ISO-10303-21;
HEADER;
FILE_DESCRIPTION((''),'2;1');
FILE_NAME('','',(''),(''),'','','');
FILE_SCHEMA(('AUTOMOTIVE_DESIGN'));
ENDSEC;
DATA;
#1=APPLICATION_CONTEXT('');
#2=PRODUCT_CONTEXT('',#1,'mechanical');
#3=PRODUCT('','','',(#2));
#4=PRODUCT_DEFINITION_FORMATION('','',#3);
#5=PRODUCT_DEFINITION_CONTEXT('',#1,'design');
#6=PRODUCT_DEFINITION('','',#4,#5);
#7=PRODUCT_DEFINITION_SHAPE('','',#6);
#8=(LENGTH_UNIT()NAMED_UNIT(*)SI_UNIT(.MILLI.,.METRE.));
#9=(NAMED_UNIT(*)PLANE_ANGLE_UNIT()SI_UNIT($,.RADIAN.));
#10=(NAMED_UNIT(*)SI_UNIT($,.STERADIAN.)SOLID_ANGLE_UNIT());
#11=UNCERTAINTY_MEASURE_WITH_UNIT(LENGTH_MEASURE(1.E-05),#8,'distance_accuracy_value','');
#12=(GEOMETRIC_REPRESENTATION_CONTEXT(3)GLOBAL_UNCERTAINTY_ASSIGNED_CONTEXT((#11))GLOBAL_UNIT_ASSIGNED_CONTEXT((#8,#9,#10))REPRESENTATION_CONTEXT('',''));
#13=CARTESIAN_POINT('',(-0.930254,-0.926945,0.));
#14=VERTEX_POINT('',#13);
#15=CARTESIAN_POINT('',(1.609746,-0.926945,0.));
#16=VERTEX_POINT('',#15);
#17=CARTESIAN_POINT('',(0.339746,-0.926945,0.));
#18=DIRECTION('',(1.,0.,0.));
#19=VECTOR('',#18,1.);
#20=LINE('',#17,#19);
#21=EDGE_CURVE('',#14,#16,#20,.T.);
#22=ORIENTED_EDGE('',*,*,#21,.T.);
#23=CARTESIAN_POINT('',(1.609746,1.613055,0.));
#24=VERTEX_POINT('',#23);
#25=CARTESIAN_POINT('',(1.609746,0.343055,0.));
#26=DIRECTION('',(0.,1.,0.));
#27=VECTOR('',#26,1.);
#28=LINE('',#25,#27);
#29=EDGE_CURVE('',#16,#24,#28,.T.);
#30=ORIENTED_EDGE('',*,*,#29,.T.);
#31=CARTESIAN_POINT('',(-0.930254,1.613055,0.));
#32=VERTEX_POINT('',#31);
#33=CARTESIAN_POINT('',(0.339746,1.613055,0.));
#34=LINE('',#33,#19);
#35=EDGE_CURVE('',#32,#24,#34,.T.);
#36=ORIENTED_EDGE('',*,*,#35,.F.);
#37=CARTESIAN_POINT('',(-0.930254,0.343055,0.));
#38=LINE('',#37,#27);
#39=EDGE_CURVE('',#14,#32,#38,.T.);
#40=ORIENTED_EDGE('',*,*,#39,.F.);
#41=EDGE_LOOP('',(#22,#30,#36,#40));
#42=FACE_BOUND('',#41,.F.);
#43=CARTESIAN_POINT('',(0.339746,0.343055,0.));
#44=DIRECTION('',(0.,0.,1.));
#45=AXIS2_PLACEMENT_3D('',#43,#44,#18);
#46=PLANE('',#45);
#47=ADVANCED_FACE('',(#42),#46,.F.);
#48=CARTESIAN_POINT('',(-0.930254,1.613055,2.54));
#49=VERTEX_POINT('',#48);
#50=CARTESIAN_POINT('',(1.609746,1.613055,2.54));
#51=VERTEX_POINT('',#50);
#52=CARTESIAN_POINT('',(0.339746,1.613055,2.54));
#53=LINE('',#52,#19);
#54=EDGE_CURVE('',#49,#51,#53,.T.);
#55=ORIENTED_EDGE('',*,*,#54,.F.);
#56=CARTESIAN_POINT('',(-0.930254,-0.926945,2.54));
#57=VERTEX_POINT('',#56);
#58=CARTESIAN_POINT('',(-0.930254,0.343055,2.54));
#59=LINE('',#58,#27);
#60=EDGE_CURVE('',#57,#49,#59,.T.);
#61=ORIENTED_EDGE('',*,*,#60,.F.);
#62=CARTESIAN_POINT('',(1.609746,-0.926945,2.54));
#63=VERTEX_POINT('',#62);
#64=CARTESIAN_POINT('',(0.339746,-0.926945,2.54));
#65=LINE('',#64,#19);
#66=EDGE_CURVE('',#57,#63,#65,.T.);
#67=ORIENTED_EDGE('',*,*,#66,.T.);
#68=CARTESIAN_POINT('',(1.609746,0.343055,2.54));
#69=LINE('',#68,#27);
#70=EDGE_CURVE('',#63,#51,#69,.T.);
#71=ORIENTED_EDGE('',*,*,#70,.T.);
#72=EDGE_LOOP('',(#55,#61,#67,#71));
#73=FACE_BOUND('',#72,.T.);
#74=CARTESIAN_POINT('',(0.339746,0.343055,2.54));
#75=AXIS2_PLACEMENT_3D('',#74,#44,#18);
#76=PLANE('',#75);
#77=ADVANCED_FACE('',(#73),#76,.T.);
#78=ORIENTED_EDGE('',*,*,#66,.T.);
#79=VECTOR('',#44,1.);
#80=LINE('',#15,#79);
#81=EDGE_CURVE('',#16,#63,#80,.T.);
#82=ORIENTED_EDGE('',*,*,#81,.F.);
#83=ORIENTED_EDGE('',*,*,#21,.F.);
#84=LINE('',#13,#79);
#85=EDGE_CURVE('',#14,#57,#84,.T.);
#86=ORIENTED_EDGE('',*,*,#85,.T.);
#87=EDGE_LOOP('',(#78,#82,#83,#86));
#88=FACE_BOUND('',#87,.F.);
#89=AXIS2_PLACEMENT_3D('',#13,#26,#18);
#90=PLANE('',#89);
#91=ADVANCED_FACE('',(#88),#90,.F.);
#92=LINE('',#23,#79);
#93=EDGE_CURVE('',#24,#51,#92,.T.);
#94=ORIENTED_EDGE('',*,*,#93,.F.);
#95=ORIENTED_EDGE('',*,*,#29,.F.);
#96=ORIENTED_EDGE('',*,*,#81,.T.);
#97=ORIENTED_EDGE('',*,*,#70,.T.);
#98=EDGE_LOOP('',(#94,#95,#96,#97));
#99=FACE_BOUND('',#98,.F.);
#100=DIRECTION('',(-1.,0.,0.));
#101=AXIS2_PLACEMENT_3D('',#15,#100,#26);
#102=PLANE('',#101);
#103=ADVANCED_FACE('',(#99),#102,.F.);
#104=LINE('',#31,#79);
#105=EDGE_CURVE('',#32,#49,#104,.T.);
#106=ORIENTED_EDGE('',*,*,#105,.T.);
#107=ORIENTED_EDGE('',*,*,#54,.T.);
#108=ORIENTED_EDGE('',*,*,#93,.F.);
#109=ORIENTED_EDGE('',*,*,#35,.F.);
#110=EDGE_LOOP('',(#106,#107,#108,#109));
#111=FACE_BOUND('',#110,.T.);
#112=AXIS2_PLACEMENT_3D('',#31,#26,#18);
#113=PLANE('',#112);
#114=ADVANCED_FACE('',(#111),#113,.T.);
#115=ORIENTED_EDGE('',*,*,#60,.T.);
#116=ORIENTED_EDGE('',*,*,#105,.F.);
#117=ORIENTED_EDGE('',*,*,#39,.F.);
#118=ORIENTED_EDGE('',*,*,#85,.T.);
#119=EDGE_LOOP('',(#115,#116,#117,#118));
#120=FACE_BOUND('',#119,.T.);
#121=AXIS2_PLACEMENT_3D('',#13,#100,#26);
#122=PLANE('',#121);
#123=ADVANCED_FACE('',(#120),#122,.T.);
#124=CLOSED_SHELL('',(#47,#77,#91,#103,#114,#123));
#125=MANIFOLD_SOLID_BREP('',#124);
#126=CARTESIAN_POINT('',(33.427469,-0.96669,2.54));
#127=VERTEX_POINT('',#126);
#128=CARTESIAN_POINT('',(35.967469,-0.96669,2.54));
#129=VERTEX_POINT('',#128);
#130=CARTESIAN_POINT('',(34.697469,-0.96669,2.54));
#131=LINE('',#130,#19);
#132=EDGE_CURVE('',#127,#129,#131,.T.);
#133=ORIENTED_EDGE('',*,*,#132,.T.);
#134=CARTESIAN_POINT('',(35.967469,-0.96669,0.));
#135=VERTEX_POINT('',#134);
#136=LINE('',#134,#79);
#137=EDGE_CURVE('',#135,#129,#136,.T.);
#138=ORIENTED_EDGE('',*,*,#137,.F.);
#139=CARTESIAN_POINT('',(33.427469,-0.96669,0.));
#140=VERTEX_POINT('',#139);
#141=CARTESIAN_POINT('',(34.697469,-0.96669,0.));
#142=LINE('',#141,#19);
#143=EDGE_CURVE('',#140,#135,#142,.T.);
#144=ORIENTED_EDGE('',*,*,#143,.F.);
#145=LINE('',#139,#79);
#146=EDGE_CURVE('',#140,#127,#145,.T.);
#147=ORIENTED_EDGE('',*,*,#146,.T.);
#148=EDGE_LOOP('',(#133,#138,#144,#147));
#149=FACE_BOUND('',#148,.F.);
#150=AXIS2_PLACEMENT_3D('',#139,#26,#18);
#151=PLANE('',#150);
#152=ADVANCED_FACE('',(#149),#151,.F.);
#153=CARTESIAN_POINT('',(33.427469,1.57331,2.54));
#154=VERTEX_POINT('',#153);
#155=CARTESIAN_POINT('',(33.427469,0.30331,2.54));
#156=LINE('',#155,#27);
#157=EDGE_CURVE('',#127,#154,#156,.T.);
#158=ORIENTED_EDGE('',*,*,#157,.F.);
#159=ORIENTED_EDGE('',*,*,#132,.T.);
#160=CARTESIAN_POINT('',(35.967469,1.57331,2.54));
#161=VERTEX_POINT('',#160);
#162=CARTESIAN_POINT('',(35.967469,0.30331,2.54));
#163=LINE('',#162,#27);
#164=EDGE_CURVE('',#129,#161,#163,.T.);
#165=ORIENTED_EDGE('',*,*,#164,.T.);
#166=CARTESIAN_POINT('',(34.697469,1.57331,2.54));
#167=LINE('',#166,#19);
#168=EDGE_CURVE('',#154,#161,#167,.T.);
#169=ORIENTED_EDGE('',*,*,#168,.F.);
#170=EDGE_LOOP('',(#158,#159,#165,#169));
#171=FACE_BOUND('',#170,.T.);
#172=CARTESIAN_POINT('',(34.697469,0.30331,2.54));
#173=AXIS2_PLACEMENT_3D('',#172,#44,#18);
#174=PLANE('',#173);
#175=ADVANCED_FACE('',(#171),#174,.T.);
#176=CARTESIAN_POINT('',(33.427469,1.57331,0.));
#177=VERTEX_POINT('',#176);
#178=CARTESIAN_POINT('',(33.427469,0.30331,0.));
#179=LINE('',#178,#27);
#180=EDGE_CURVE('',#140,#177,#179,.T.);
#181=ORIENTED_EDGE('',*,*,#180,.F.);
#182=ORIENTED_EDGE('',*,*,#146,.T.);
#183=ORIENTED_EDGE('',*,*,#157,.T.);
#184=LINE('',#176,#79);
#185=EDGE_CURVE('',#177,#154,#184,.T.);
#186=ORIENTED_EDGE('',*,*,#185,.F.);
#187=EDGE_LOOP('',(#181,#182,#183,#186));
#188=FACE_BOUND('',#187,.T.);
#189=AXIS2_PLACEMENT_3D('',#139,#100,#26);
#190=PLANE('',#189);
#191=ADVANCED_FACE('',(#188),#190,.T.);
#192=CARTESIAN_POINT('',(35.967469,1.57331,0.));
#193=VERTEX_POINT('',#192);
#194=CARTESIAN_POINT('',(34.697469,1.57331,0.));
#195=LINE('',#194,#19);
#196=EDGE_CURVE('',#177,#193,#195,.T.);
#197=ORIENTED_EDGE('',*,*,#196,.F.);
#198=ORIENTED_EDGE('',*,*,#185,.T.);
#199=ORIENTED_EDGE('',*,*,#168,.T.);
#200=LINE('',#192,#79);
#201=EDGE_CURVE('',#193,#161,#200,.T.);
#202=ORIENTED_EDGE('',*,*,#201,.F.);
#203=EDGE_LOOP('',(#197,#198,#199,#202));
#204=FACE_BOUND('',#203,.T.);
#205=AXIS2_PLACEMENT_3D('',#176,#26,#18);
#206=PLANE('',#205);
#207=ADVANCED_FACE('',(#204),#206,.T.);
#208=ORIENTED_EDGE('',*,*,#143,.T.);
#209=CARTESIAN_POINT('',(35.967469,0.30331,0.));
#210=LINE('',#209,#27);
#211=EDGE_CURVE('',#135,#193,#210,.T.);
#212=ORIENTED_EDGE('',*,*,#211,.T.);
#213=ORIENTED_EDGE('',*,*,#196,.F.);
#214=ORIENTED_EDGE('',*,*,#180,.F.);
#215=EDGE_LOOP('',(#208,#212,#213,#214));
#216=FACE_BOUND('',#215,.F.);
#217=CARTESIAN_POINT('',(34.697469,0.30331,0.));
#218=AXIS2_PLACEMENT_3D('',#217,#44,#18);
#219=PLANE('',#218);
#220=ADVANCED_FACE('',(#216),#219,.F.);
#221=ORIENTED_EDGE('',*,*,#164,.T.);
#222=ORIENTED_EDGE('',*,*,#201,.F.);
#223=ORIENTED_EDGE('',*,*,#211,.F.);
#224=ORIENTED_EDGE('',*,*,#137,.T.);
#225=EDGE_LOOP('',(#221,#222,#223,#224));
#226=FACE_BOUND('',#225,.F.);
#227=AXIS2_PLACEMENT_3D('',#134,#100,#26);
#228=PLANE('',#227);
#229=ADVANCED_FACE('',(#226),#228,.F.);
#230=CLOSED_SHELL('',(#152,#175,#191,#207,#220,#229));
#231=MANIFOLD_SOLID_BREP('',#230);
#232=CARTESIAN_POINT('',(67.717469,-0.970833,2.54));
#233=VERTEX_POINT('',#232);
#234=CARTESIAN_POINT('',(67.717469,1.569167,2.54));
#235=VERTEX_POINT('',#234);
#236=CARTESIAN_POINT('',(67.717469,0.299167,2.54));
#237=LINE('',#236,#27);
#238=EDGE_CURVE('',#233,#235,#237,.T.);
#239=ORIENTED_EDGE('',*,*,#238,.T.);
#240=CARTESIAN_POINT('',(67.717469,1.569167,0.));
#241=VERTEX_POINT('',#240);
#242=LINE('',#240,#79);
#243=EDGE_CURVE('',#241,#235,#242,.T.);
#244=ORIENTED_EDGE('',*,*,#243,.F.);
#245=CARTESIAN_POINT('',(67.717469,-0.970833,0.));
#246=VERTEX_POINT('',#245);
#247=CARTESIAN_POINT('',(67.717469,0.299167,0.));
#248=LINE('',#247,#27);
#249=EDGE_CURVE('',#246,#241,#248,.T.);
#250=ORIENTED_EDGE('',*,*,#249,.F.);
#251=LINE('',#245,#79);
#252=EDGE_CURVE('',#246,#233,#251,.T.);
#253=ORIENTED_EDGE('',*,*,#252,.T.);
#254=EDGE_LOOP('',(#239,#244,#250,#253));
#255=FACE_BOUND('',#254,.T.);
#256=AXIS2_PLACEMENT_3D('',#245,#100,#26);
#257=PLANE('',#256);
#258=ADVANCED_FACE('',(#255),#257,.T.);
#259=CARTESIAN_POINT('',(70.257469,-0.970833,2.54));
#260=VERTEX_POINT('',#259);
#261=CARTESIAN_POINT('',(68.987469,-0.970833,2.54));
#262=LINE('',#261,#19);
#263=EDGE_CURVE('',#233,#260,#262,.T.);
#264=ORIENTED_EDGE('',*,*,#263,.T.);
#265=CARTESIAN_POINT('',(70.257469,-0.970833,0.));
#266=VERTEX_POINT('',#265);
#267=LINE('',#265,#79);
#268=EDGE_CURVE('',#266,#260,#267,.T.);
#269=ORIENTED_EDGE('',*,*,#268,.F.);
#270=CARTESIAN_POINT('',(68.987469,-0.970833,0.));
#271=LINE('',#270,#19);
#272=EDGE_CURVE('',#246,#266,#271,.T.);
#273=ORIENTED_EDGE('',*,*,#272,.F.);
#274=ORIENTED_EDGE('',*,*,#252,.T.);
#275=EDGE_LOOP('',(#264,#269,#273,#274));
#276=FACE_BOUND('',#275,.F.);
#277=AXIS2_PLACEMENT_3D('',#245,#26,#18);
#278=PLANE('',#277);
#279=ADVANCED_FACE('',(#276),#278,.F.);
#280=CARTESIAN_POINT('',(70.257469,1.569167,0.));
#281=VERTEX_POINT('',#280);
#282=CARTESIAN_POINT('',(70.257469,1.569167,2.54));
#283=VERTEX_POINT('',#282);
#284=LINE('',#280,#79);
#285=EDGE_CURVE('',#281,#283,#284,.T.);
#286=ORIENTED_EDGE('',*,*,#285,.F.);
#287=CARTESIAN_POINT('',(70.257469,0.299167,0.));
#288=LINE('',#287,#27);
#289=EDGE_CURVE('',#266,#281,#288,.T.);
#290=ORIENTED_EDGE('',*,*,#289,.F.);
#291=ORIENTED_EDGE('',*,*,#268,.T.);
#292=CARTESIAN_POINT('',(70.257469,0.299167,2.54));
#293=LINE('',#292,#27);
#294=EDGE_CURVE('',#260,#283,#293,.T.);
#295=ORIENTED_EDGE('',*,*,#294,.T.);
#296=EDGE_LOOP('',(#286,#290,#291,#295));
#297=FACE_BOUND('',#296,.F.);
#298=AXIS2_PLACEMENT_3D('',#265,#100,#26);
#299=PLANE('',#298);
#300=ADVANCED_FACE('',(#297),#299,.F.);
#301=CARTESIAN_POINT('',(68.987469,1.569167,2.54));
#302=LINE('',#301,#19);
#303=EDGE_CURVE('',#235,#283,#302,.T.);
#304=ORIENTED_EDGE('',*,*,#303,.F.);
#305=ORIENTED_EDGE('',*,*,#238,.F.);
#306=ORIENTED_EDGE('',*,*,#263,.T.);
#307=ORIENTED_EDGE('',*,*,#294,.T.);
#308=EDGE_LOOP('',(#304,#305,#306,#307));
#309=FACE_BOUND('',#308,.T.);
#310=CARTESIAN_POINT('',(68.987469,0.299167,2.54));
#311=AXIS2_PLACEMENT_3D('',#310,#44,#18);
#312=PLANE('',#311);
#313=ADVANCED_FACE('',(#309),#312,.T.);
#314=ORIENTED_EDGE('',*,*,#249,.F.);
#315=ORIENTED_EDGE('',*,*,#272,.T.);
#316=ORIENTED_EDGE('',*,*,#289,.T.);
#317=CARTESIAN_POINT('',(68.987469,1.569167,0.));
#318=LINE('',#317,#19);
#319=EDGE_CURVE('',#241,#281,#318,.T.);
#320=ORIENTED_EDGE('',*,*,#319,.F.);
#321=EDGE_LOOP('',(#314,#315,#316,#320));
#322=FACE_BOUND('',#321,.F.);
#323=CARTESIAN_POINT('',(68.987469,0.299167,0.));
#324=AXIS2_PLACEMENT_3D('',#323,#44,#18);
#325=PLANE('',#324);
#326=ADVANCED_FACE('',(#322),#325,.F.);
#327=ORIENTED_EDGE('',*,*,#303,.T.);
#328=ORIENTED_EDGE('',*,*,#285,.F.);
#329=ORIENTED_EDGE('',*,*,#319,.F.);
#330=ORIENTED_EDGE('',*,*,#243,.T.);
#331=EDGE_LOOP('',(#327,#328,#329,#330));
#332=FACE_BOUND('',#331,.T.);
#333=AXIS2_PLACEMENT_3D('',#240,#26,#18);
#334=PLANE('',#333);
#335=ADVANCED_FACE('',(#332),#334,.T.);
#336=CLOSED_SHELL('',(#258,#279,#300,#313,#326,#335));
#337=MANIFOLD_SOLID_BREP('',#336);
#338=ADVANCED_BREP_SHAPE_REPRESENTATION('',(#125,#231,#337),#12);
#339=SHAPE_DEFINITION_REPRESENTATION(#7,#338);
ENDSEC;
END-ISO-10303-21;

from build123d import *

# Parameters (mm, degrees)
F0_W     = 2.54
F0_H     = 2.54
F1_DEPTH = 2.54
F2_W     = 2.54
F2_H     = 2.54
F3_DEPTH = 2.54
F4_W     = 2.54
F4_H     = 2.54
F5_DEPTH = 2.54


# Not quite as in the source:
# - the program builds the solid bodies; features that only make, move or delete a surface that nothing else refers to are left out


with BuildPart() as f1:
    # F0 (on Top) → F1 (new body)
    with BuildSketch(Plane.XY):
        with Locations((0.3397457767, 0.3430546279)):
            Rectangle(F0_W, F0_H)
    extrude(amount=F1_DEPTH)


with BuildPart() as f3:
    # F2 (on Top) → F3 (new body)
    with BuildSketch(Plane.XY):
        with Locations((34.6974694668, 0.3033101014)):
            Rectangle(F2_W, F2_H)
    extrude(amount=F3_DEPTH)


with BuildPart() as f5:
    # F4 (on Top) → F5 (new body)
    with BuildSketch(Plane.XY):
        with Locations((68.9874694668, 0.2991668801)):
            Rectangle(F4_W, F4_H)
    extrude(amount=F5_DEPTH)


solid = Compound([f1.part, f3.part, f5.part])
